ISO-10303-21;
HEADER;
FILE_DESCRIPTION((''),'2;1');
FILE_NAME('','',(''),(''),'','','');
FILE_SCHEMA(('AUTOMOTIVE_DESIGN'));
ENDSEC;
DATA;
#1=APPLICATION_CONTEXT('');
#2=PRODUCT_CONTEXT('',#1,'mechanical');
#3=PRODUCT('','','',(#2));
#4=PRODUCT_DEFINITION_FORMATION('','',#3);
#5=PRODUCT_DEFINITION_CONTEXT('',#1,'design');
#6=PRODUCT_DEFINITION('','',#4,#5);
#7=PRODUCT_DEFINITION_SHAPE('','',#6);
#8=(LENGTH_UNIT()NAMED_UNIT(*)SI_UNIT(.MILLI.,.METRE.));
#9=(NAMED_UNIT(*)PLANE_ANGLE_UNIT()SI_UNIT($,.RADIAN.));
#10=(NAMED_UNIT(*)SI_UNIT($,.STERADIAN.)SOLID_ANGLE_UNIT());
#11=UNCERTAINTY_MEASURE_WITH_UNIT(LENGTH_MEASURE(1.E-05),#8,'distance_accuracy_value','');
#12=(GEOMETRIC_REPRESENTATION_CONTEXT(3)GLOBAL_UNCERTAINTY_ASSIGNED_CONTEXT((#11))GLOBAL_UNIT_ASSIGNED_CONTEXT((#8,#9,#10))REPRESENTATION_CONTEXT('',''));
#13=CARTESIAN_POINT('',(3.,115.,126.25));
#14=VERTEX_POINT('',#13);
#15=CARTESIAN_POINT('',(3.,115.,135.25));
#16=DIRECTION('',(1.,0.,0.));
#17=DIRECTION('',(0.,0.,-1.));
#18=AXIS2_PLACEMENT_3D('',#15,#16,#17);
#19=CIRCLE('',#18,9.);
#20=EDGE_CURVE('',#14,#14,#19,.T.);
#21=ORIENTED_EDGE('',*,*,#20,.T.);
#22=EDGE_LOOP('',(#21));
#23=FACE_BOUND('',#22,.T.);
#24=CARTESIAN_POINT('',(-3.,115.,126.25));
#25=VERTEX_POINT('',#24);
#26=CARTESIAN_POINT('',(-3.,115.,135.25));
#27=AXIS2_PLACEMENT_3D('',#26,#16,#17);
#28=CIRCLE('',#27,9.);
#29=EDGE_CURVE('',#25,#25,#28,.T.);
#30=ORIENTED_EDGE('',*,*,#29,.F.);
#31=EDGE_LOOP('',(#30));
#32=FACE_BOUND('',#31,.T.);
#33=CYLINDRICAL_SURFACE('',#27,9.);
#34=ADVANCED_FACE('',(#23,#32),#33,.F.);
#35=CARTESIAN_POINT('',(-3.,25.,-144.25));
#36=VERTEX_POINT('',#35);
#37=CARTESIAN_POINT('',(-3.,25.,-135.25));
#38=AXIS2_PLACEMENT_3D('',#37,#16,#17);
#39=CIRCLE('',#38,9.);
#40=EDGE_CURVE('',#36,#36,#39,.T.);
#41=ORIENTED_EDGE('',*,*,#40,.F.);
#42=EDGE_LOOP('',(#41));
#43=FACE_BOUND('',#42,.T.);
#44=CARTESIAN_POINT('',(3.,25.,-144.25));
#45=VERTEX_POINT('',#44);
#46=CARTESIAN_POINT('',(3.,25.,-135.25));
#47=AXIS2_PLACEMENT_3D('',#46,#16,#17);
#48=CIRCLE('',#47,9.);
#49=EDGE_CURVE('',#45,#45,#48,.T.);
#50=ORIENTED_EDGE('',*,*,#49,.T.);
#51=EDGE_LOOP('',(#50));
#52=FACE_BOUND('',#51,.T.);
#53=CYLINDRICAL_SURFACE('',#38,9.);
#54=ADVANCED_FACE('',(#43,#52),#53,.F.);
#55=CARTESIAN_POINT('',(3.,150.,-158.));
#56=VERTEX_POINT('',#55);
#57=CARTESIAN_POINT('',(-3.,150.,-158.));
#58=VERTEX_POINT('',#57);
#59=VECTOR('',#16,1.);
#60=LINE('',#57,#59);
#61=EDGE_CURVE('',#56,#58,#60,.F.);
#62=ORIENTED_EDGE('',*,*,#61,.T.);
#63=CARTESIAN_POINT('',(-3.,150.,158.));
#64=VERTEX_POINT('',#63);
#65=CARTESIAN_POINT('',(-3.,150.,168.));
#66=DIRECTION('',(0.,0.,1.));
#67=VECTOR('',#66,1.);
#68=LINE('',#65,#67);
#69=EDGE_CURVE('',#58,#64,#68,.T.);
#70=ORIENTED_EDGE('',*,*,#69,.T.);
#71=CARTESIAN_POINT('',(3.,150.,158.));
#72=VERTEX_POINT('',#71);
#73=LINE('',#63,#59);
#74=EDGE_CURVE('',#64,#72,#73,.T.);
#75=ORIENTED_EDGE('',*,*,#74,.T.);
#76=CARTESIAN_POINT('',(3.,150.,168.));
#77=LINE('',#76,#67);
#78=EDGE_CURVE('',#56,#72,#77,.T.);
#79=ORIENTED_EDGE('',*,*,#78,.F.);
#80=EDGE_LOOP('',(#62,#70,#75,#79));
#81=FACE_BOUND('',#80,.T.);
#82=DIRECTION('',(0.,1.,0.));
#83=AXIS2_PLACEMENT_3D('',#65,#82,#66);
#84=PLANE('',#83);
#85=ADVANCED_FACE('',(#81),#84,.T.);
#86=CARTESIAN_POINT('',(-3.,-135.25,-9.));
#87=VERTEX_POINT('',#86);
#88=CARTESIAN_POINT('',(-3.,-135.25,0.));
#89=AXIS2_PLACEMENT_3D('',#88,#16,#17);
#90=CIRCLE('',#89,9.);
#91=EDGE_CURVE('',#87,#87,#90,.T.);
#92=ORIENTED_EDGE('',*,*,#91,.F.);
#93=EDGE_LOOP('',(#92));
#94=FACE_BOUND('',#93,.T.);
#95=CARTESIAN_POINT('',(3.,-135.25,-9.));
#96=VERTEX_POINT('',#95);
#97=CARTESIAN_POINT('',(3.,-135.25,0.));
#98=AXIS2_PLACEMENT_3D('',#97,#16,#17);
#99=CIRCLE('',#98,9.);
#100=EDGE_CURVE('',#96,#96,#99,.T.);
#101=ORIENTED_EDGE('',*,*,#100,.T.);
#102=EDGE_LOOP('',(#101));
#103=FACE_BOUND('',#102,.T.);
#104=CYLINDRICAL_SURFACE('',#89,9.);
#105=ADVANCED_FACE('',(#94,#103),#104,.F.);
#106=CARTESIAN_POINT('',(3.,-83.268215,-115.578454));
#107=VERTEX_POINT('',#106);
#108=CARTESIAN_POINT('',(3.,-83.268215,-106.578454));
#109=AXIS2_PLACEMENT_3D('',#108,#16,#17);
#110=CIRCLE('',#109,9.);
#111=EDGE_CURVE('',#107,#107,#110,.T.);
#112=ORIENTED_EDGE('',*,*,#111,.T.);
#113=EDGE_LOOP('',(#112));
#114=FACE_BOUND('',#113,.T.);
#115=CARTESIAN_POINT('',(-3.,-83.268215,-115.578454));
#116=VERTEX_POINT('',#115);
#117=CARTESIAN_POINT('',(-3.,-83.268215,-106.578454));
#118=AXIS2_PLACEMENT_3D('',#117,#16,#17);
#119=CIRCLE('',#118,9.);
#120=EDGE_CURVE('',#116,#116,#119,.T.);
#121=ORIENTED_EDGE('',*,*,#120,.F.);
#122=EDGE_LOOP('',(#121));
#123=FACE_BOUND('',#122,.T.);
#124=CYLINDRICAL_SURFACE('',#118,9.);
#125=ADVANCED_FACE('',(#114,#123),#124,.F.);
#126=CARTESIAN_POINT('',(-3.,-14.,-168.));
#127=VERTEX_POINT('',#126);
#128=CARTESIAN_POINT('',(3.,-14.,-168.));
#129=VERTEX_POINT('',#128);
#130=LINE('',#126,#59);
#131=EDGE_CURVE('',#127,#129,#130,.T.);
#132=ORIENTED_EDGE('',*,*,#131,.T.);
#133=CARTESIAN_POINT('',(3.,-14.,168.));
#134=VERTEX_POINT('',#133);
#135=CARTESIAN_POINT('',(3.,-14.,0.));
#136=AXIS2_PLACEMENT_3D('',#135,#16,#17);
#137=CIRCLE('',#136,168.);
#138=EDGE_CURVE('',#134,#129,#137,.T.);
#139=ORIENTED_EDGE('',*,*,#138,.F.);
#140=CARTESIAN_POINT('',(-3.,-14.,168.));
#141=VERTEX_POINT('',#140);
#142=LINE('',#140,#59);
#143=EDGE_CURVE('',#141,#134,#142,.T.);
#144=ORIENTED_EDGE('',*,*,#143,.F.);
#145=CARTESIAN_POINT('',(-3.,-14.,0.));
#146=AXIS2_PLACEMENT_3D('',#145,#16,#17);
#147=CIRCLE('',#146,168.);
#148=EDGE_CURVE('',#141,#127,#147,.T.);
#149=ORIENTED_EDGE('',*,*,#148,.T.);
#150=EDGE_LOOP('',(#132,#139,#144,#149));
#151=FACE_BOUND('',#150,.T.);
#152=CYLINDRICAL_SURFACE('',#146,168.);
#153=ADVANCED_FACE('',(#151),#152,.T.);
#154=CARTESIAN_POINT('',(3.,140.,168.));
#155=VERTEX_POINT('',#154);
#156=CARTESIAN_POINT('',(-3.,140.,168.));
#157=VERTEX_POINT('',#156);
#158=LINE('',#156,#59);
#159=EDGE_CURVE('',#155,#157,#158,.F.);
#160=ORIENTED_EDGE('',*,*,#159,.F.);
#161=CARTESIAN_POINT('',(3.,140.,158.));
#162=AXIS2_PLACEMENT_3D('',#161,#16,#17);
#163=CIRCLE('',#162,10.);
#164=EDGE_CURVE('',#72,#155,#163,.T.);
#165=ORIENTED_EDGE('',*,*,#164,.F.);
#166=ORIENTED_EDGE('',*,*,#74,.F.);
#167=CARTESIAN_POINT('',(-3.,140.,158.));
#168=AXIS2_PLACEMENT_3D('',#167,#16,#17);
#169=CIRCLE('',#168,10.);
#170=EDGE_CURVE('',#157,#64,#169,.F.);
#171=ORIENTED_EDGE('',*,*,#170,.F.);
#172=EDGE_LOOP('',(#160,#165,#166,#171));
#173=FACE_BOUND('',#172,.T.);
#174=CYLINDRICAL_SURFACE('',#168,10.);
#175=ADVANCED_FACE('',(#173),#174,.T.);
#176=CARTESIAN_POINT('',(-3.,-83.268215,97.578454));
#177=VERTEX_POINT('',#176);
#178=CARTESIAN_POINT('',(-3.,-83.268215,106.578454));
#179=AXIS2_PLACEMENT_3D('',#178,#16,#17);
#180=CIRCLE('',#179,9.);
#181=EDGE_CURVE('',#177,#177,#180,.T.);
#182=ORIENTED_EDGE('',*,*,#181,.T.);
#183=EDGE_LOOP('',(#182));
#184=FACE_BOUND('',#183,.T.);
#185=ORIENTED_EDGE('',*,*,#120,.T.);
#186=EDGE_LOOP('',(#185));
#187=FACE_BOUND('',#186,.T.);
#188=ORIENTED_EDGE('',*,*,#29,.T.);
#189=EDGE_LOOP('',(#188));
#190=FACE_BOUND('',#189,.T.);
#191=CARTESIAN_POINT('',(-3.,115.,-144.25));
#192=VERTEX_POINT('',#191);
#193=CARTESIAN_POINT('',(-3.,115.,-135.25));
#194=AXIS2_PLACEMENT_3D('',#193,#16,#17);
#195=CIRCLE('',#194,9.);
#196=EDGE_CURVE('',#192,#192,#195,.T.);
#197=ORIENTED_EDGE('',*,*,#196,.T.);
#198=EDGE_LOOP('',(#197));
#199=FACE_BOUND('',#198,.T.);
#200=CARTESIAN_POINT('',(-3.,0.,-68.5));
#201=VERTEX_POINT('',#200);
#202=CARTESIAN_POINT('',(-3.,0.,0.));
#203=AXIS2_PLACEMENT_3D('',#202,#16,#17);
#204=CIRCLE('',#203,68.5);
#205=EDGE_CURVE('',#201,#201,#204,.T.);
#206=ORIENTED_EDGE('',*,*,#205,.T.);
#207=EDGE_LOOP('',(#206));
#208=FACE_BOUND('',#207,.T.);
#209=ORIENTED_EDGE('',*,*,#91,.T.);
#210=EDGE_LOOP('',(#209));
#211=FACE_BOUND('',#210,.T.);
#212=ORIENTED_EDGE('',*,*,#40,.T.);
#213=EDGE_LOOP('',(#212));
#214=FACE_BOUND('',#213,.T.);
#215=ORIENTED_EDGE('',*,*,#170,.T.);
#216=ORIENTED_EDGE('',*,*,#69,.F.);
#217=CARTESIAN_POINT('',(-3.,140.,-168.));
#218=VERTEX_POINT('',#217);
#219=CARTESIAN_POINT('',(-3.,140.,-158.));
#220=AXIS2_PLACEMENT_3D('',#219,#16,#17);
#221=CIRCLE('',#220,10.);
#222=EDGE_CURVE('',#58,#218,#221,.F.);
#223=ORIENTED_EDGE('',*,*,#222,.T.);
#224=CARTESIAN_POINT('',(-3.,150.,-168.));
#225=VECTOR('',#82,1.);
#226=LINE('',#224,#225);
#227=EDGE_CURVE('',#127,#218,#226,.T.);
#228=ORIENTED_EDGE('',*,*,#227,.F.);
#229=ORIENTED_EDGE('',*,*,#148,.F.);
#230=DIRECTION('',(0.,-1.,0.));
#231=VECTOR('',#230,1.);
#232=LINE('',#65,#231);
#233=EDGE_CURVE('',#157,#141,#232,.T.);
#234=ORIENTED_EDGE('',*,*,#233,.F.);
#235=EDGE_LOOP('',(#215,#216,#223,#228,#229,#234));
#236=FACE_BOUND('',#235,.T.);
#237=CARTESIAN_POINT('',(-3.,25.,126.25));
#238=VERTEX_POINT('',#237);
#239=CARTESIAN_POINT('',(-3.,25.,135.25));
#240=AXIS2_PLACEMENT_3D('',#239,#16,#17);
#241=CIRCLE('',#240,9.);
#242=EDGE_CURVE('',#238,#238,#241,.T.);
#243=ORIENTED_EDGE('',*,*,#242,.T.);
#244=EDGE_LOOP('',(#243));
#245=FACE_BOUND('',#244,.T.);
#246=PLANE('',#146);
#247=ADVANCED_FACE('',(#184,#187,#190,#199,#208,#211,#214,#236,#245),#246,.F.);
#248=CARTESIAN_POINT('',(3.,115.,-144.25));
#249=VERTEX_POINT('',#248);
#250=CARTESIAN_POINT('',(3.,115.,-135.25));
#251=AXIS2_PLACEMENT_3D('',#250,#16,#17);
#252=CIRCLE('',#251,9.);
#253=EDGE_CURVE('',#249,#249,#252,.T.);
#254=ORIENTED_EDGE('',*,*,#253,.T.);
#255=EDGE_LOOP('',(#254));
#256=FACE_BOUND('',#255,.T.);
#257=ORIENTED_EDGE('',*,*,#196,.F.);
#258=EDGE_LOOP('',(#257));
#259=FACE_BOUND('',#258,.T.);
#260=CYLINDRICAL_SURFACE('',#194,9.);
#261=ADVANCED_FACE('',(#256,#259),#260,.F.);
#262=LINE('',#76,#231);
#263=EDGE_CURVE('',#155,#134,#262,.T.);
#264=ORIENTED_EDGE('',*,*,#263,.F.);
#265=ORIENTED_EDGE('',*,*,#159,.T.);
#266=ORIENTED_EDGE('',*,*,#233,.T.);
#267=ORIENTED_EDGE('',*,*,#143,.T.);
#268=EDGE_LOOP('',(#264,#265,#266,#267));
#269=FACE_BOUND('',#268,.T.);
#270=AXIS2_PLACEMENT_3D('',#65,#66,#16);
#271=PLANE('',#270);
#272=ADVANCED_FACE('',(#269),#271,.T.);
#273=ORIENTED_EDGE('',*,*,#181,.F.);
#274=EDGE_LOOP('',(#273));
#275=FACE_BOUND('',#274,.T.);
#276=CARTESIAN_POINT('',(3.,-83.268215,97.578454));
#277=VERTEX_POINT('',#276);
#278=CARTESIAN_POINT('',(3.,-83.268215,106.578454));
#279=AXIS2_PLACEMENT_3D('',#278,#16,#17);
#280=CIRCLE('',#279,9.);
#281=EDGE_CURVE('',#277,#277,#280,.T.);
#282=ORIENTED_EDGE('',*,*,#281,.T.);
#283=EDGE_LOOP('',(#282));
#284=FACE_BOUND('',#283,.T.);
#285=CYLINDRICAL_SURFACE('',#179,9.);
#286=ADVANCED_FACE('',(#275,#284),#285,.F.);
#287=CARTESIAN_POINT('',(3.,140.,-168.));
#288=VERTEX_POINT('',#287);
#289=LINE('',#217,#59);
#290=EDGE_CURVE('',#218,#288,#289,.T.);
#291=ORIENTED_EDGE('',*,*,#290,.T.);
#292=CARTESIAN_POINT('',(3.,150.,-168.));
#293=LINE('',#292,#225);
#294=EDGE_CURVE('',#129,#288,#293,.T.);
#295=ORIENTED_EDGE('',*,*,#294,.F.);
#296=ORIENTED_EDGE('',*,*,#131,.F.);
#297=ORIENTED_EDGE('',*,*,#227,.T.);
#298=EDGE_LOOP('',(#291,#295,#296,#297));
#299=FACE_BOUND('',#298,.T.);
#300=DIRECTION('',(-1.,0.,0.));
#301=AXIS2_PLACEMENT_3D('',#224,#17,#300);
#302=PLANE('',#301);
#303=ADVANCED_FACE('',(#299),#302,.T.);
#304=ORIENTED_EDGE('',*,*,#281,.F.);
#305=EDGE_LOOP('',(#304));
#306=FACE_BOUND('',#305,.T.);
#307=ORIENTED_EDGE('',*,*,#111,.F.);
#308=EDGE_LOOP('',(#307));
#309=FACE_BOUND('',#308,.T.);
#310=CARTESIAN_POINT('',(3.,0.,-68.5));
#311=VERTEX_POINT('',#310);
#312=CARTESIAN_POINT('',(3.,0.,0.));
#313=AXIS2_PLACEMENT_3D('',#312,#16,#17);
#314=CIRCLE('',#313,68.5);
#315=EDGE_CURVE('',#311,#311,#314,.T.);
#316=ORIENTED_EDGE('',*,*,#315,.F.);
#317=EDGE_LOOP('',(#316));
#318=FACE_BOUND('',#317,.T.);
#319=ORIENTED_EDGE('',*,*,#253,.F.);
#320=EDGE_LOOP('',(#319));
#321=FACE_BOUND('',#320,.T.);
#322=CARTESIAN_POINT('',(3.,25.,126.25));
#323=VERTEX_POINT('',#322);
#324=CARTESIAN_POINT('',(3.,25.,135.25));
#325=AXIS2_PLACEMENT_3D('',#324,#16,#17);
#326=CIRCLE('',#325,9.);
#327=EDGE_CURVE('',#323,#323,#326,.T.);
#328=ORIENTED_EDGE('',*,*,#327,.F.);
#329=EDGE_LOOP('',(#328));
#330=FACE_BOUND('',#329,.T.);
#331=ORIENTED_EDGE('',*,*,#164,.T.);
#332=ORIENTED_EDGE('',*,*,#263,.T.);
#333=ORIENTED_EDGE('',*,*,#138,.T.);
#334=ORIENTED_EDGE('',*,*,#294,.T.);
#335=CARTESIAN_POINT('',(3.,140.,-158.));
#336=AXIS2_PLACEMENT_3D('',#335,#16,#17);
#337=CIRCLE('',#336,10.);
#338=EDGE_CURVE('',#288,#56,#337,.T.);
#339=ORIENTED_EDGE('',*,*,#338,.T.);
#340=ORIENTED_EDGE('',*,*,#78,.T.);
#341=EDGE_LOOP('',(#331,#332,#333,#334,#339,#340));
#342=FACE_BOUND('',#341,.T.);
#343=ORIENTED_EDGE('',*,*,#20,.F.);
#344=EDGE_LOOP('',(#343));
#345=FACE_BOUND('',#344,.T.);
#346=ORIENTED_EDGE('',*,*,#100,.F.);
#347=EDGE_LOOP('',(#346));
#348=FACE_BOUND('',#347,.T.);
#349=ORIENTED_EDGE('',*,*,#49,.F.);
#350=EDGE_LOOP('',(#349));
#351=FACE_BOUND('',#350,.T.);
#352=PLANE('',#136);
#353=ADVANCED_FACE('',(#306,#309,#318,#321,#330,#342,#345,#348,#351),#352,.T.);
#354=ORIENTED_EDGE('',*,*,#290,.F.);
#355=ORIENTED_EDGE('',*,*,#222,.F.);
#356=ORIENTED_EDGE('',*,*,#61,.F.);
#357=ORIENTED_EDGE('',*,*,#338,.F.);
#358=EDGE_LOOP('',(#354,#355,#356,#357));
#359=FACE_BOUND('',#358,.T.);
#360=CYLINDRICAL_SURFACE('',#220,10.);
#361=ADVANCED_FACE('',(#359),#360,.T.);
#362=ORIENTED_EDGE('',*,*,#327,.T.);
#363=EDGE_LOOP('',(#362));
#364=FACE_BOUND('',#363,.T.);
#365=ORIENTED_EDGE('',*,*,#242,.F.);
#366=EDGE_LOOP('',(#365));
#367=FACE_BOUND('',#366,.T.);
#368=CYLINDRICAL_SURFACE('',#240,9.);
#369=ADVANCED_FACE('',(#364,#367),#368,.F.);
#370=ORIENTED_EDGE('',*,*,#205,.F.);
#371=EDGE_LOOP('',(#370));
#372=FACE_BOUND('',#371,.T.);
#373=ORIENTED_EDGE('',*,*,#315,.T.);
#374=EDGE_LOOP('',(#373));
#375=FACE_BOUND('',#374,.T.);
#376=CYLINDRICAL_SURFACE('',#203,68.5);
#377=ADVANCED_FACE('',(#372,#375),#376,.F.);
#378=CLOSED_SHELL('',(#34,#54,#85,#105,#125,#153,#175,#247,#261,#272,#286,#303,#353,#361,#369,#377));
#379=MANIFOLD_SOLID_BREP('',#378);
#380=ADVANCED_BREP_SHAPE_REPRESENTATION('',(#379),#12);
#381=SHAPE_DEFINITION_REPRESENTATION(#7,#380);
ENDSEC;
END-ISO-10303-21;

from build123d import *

# Parameters (mm, degrees)
SM_START               = -3
SM_BASE_FLANGE_1_DEPTH = 6
SKETCH_6_R             = 9
SKETCH_6_R_2           = 68.5
CUT_EXTRUDE_1_DEPTH    = 248.757946391
FILLET_1_R             = 10


# Read off the part's stored shape, not the designer's step: Базовая кромка1
with BuildPart() as part:
    # Базовая кромка1 outline → Базовая кромка1 (new body)
    with BuildSketch(Plane(origin=(0, 0, 0), x_dir=(0, 0, -1), z_dir=(1, 0, 0)).offset(SM_START)):
        with BuildLine():
            Line((168, -14), (168, 150))
            Line((168, 150), (-168, 150))
            Line((-168, 150), (-168, -14))
            ThreePointArc((-168, -14), (0, -182), (168, -14))
        make_face()
    extrude(amount=SM_BASE_FLANGE_1_DEPTH)

    # Эскиз6 → Вырез-Вытянуть1 (cut, through all)
    with BuildSketch(Plane(origin=(3, 0, 0), x_dir=(0, 0, -1), z_dir=(1, 0, 0))):
        with Locations((-135.25, 115)):
            Circle(SKETCH_6_R)
        with Locations((-106.578454425, -83.268214538)):
            Circle(SKETCH_6_R)
        with Locations((0, -135.25)):
            Circle(SKETCH_6_R)
        with Locations((106.578454425, -83.268214538)):
            Circle(SKETCH_6_R)
        with Locations((135.25, 115)):
            Circle(SKETCH_6_R)
        Circle(SKETCH_6_R_2)
        with Locations((-135.25, 25)):
            Circle(SKETCH_6_R)
        with Locations((135.25, 25)):
            Circle(SKETCH_6_R)
    extrude(amount=-CUT_EXTRUDE_1_DEPTH, mode=Mode.SUBTRACT)

    # Скругление1
    fillet_1_edges = [part.edges().sort_by_distance(p)[0] for p in [
        (0, 150, -168),
        (0, 150, 168),
    ]]
    fillet(fillet_1_edges, radius=FILLET_1_R)


solid = part.part
